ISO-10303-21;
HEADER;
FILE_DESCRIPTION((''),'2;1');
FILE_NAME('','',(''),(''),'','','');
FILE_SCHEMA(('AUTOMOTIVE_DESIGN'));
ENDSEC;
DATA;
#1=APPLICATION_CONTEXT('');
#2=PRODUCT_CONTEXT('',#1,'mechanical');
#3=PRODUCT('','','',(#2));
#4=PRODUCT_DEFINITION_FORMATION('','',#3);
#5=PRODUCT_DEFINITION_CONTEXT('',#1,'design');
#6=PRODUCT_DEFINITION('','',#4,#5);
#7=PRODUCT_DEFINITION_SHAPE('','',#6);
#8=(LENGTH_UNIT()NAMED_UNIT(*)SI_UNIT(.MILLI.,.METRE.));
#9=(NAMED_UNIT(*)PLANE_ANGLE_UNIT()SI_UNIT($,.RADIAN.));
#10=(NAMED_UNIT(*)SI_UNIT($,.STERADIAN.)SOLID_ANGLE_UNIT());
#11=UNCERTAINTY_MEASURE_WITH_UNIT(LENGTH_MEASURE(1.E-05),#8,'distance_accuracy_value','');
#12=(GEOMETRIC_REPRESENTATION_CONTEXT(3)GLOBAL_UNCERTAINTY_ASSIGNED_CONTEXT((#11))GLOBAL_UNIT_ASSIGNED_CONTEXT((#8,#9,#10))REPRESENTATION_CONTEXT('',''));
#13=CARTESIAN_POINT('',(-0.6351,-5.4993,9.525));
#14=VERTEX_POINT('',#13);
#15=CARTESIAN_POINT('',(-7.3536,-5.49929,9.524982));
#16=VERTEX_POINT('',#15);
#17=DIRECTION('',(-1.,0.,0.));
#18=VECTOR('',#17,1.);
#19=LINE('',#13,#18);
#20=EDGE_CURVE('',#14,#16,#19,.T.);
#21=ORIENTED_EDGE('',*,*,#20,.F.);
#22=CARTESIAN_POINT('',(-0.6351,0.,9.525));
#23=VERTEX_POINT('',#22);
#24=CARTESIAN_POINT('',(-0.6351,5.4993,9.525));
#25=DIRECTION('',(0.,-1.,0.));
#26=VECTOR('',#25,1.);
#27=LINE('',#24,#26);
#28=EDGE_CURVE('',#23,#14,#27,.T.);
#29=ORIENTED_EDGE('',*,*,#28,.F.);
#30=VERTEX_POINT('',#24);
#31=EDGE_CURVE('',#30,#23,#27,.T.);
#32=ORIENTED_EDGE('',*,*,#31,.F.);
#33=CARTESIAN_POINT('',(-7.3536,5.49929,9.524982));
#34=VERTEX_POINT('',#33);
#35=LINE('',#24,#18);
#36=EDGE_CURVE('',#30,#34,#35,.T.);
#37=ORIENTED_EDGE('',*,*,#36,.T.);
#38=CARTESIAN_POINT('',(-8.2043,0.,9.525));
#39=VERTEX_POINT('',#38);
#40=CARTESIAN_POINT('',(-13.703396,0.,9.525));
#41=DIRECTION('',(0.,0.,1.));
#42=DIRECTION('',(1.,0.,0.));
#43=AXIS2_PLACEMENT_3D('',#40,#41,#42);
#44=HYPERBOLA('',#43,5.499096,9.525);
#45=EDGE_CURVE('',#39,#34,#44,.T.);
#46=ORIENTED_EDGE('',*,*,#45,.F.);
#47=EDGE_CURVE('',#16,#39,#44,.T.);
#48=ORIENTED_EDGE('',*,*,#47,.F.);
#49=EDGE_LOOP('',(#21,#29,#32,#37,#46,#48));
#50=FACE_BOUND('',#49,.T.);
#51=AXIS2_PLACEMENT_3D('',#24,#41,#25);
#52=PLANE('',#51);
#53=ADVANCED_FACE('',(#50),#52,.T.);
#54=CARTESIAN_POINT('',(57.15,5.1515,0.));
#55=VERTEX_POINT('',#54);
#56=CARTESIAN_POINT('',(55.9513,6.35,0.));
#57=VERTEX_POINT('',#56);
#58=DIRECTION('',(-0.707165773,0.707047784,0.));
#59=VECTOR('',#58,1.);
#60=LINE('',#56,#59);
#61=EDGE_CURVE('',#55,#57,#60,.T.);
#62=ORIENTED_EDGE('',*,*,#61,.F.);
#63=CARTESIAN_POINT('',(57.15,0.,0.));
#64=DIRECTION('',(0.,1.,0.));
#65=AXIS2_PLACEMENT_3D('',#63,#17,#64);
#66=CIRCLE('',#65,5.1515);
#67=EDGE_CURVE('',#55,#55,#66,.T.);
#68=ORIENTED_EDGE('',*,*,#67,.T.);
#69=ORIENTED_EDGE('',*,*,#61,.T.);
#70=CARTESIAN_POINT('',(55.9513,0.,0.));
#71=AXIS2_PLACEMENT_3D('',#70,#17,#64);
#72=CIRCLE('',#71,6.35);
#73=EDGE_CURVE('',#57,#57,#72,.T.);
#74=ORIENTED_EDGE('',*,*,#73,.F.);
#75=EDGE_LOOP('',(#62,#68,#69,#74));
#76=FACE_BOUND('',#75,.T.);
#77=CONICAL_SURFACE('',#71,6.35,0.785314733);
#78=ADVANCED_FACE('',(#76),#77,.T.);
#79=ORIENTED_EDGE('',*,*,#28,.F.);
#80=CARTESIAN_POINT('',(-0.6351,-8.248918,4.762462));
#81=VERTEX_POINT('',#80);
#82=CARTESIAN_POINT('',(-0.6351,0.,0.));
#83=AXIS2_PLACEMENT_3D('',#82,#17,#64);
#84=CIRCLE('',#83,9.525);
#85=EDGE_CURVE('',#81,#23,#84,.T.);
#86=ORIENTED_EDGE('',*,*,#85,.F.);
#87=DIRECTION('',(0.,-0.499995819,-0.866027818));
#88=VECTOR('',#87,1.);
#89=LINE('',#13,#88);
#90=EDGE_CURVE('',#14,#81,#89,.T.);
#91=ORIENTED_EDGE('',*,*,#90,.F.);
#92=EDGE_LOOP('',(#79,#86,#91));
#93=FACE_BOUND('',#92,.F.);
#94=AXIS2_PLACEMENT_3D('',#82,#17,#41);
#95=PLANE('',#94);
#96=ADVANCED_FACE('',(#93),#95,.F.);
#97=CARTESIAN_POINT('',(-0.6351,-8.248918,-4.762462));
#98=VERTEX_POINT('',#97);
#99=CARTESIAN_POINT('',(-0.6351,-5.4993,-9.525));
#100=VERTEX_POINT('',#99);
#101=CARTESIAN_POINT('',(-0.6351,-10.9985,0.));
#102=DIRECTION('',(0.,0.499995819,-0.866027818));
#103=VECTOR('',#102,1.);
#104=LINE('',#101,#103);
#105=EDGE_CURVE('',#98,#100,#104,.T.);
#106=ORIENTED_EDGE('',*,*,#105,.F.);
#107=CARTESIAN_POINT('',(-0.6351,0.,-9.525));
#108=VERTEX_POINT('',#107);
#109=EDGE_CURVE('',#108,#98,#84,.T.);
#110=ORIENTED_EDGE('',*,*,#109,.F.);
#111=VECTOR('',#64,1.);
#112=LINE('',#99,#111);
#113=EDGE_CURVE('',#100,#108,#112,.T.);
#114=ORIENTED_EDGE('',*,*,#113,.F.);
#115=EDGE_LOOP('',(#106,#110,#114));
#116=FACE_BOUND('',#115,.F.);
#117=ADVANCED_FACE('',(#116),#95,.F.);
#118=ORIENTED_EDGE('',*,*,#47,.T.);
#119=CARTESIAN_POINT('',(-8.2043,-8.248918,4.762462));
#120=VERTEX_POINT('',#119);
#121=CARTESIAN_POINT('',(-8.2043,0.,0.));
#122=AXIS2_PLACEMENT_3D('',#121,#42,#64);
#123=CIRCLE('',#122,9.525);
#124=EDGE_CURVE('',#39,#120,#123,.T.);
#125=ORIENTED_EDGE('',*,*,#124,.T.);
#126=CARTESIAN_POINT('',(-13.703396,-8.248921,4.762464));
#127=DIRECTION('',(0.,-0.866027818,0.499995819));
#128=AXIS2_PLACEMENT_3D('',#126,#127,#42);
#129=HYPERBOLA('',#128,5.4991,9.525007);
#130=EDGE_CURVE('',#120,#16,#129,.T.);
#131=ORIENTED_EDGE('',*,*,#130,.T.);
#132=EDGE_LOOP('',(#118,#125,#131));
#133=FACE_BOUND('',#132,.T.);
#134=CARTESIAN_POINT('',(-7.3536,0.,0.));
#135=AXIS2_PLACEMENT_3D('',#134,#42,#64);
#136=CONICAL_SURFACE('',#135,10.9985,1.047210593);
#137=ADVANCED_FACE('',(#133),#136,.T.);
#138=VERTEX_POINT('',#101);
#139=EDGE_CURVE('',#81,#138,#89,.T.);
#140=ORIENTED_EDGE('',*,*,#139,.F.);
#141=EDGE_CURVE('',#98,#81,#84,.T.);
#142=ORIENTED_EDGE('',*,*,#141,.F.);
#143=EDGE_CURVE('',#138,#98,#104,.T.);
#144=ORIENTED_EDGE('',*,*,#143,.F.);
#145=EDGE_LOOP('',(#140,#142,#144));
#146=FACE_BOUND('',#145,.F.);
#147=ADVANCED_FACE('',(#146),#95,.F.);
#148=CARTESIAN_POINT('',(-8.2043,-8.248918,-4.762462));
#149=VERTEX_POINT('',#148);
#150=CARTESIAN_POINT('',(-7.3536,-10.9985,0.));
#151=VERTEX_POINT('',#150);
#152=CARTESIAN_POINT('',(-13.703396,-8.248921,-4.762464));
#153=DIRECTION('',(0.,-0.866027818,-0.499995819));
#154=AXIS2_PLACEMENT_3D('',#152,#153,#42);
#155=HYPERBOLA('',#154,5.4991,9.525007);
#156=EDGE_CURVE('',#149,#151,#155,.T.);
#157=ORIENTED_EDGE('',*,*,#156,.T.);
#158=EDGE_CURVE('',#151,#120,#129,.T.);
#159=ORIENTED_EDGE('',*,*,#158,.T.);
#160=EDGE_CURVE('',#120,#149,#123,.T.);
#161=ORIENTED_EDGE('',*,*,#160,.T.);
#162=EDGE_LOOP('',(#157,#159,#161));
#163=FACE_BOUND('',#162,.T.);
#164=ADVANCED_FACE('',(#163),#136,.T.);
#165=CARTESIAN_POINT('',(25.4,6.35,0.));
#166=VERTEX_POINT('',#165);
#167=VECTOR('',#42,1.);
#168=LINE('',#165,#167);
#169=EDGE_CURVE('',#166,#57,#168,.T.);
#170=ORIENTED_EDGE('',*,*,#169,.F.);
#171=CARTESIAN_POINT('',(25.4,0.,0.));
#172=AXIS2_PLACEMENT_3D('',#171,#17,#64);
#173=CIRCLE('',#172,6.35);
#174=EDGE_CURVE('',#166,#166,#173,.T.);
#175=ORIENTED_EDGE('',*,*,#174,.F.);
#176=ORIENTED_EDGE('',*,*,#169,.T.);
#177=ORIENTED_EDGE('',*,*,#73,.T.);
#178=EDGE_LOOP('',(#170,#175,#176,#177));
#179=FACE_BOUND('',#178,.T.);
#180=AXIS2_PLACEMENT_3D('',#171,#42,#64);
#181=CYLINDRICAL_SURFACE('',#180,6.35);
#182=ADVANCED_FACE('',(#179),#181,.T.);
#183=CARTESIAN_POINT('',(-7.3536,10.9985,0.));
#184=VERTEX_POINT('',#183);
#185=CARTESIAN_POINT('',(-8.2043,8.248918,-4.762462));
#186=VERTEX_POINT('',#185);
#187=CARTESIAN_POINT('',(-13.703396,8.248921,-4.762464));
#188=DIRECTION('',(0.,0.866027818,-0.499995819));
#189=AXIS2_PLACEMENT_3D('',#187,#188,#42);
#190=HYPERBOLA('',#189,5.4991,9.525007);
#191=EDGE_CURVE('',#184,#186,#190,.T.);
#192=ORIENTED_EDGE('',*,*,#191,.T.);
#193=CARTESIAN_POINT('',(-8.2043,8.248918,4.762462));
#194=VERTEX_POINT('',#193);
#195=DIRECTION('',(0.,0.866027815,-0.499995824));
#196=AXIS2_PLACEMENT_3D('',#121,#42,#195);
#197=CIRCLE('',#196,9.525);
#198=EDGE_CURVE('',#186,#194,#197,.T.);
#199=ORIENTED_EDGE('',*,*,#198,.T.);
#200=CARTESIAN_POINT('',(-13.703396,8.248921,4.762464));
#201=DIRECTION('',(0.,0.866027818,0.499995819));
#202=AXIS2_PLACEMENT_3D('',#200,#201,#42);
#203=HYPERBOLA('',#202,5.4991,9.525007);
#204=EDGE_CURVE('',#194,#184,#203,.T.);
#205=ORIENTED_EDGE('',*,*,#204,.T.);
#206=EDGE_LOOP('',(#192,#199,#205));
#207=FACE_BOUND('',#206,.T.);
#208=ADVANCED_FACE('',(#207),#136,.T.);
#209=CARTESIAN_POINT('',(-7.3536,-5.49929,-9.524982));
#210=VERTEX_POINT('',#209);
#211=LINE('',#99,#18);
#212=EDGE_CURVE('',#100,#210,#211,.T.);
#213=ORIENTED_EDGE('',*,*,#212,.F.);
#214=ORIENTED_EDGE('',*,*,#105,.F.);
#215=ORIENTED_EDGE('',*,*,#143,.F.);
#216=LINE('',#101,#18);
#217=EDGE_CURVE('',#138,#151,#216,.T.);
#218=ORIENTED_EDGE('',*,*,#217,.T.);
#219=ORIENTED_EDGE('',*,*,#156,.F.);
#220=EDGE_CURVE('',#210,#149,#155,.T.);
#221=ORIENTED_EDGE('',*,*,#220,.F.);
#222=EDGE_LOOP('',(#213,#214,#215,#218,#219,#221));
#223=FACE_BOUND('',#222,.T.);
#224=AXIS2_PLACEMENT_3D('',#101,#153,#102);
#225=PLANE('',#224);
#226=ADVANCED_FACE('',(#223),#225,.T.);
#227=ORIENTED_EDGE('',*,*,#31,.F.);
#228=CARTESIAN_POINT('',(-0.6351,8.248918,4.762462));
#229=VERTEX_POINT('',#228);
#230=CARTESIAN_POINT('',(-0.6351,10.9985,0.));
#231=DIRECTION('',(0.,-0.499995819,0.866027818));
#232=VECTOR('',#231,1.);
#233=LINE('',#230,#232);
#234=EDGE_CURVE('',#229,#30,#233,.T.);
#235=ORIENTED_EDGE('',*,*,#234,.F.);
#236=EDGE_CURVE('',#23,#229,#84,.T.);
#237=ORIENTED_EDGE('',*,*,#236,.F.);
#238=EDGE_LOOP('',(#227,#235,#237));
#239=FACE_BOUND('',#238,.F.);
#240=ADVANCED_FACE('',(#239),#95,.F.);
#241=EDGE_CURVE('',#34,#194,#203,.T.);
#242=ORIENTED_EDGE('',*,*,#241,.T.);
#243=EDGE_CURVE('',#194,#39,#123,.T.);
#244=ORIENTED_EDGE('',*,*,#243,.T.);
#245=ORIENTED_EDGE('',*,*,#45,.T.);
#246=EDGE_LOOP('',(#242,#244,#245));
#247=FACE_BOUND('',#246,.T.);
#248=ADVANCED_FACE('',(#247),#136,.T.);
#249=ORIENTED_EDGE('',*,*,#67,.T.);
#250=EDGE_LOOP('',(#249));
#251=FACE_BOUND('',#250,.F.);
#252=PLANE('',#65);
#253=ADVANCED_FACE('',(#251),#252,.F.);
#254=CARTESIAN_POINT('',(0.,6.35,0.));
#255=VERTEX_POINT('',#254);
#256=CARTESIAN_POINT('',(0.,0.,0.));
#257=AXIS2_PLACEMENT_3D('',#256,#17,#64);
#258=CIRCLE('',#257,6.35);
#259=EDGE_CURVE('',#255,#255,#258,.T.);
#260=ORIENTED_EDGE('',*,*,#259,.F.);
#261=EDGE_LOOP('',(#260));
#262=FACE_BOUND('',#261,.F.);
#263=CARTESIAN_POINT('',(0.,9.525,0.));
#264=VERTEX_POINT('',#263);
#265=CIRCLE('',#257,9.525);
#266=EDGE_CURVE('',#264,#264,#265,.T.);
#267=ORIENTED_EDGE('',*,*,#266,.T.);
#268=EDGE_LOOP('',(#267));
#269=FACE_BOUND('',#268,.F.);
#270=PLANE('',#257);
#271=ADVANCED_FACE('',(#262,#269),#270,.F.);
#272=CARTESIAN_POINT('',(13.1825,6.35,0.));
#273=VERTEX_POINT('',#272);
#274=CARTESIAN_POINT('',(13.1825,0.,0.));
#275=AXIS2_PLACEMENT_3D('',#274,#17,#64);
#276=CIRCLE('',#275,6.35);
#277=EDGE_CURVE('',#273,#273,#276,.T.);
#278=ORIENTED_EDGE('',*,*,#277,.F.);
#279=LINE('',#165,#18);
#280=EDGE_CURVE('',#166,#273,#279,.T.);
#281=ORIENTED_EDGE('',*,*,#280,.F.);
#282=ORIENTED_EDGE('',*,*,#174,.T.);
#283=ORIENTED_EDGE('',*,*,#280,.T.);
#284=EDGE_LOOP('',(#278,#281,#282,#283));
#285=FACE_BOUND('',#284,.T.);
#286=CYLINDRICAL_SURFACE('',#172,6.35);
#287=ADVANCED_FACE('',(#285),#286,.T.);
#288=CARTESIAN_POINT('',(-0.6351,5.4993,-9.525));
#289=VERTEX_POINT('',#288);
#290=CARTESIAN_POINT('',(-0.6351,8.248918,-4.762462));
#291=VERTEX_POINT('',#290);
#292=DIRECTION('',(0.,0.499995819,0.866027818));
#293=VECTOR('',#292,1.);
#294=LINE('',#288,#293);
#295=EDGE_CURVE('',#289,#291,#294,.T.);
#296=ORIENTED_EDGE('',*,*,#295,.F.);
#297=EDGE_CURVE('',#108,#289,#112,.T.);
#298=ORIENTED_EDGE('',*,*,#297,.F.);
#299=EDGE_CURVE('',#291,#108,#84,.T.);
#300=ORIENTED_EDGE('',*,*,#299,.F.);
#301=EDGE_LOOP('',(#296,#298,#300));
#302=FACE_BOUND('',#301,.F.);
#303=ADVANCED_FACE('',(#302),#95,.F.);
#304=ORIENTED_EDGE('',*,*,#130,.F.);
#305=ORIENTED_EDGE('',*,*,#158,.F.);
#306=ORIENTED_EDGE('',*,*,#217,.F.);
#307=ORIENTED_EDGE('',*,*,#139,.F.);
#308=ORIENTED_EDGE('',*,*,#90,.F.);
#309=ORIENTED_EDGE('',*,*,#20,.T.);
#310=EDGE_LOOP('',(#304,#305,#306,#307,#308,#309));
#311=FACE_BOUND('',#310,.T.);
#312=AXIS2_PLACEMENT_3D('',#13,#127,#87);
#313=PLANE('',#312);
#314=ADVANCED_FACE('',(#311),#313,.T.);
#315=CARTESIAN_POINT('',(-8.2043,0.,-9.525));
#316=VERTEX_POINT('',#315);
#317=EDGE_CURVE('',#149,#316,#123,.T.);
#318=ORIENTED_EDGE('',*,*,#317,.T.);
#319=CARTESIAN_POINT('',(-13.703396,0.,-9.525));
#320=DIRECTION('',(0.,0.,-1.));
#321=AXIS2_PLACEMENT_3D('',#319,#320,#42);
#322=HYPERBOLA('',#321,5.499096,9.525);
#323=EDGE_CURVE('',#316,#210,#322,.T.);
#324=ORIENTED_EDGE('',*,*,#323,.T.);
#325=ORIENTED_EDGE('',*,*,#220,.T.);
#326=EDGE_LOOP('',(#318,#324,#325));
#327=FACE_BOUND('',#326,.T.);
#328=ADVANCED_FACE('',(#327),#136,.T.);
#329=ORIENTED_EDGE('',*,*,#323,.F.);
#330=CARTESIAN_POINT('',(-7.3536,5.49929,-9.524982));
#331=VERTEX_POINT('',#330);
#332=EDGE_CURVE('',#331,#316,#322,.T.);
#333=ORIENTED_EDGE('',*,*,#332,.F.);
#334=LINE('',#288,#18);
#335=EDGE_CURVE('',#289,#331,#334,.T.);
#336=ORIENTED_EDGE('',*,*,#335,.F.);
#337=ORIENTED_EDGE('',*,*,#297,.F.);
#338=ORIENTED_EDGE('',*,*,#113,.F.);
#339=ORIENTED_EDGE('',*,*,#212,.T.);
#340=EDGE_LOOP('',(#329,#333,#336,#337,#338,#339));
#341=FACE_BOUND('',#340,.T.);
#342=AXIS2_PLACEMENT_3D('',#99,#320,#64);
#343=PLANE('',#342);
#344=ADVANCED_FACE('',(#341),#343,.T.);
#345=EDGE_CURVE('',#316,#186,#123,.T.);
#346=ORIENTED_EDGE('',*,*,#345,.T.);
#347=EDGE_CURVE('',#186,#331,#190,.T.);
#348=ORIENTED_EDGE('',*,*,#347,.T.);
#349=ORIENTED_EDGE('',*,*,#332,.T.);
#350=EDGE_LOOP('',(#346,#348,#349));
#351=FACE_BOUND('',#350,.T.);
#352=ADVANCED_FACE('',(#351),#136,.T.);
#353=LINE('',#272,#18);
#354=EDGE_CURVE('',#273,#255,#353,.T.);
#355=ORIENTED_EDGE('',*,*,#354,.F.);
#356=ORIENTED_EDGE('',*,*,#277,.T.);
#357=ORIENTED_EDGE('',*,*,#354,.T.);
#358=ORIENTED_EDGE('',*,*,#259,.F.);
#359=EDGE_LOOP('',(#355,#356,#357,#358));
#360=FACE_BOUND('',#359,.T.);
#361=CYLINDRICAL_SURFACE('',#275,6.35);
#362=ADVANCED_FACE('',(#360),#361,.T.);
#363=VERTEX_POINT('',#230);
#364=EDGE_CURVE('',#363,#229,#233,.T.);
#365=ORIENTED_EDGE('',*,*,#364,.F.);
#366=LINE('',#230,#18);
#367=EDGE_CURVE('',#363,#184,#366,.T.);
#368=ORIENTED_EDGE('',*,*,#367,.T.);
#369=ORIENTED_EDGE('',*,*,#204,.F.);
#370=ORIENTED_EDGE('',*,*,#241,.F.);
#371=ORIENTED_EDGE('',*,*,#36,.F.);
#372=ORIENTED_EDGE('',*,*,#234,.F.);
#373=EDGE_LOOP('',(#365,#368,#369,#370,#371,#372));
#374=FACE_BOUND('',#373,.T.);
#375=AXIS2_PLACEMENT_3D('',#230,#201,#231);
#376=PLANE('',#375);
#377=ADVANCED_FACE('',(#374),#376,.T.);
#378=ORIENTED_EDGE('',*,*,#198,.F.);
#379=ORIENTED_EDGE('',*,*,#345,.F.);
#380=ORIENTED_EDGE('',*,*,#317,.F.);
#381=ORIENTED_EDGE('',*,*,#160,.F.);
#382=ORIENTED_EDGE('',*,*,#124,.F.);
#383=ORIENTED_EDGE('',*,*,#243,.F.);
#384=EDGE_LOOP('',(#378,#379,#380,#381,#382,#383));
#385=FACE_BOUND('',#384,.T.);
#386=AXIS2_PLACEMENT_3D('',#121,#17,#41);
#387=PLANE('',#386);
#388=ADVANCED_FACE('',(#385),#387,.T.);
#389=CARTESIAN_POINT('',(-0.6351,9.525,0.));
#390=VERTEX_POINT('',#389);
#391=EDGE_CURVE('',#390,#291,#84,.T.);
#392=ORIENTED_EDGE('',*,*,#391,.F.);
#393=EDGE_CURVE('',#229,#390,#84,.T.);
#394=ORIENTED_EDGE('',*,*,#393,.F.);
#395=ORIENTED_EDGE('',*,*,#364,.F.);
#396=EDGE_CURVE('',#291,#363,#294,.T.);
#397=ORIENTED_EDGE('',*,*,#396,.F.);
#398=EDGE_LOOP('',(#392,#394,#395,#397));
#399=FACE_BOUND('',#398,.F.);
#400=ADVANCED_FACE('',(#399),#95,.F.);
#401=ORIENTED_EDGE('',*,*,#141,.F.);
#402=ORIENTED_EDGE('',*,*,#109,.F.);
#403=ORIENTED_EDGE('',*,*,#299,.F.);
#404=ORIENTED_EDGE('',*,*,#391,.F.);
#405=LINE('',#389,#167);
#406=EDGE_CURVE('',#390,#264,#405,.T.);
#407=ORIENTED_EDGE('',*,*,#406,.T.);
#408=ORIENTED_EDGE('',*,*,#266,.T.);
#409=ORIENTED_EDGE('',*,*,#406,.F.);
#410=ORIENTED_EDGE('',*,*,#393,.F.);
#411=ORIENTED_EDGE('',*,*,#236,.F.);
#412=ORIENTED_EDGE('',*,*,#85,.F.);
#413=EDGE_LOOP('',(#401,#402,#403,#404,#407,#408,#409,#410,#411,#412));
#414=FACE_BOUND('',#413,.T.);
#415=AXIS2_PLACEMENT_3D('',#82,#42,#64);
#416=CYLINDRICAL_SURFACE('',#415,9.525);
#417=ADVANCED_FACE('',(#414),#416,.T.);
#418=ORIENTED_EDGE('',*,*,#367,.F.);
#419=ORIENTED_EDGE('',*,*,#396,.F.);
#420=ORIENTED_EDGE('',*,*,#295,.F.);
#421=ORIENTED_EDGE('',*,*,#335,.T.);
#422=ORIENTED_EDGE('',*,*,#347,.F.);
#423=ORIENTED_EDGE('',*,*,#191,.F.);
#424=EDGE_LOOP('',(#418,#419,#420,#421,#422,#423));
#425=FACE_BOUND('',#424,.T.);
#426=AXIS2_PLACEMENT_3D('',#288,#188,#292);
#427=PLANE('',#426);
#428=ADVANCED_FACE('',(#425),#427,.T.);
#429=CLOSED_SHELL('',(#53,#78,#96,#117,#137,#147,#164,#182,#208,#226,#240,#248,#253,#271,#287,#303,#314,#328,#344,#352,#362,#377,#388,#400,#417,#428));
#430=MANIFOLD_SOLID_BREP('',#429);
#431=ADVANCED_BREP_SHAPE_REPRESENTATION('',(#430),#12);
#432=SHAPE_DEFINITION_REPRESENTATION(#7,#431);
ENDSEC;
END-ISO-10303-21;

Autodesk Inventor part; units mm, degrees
ref_plane "YZ Plane" through (0, 0, 0) normal (1, 0, 0) x (0, 1, 0)
ref_plane "XZ Plane" through (0, 0, 0) normal (0, 1, 0) x (-1, 0, 0)
sketch "Sketch1" plane through (0, 0, 0) normal (0, 0, 1) x (1, 0, 0)
  line L0 (0, 9.525) -> (0, 6.35)
  line L1 (25.4, 6.35) -> (57.15, 6.35)
  line L2 (57.15, 6.35) -> (57.15, 0)
  line L3 (57.15, 0) -> (-0.6351, 0)
  line L4 (-12.1921, 0) -> (68.707, 0) projected
  line L5 (-0.6351, 0) -> (-0.6351, 9.525)
  line L6 (-0.6351, 9.525) -> (0, 9.525)
  line L7 (25.4, 6.35) -> (13.1825, 6.35)
  line L8 (13.1825, 6.35) -> (0, 6.35)
  line L9 (0, -1.905) -> (0, 11.43) projected
  dimension "d0" = 57.15
  dimension "d1" = 31.75
  dimension "d2" = 12.7
  dimension "d9" = 0.6351
  dimension "d10" = 19.05
  dimension "d13" = 12.2175
  dimension "d14" = 12.7
revolve "Body" add sketch "Sketch1" angle 360 about axis through (57.15, 0, 0) along (-1, 0, 0)
sketch "Sketch2" plane through (-0.6351, 0, 0) normal (-1, 0, 0) x (0, 0, 1)
  line L0 (0, 10.9985) -> (9.525, 5.4993)
  line L1 (9.525, 5.4993) -> (9.525, -5.4993)
  line L2 (9.525, -5.4993) -> (0, -10.9985)
  line L3 (0, -10.9985) -> (-9.525, -5.4993)
  line L4 (-9.525, -5.4993) -> (-9.525, 5.4993)
  line L5 (-9.525, 5.4993) -> (0, 10.9985)
  point P0 (0, 0)
  point P1 (0, 0)
  dimension "d11" = 19.05
extrude "Head" add sketch "Sketch2" along normal blind 7.5692
sketch "Sketch4" plane through (0, 0, 0) normal (0, 0, 1) x (1, 0, 0)
  line L0 (-8.2043, 9.525) -> (-8.2043, 10.9985)
  line L1 (-8.2043, 10.9985) -> (-7.3536, 10.9985)
  line L2 (-7.3536, 10.9985) -> (-8.2043, 9.525)
  line L3 (-9.7181, 0) -> (0.8787, 0) projected
  line L4 (-0.6351, 10.9985) -> (-8.2043, 10.9985) projected
  line L5 (-8.2043, 5.4993) -> (-8.2043, 10.9985) projected
  dimension "d5" = 30
  dimension "d19" = 19.05
revolve "Chamfer1" cut sketch "Sketch4" angle 360 about axis through (-10, 0, 0) along (1, 0, 0)
thread "Thread" size "1/2-13 UNC" class "2A" standard "ANSI Unified Screw Threads" length 31.75
chamfer "Chamfer2" distance 1.1985 distance2 1.1987 1 edges at (57.15, -6.35, 0) measured on face at (57.15, -0.2551, -3.1143)
ref_plane "Work Plane1" through (1.525, 0, 0) normal (0, 0, 1) x (1, 0, 0)
equation "\"d0\" = NLG"
equation "\"d1\" = GEL"
equation "\"d2\" = GD"
equation "\"d10\" = SD2"
equation "\"d14\" = BDM"
equation "\"d11\" = SW"
equation "\"d3\" = KOH - SD"
equation "\"d5\" = ANG1"
equation "\"d19\" = SW0"
equation "\"d15\" = GEL"
equation "\"d6\" = -0.5 * SPD + 0.5 * GD"
equation "\"NLG\" = 57.15"
equation "\"GD\" = 12.7"
equation "\"BDM\" = 12.7"
equation "\"KOH\" = 8.2042"
equation "\"GEL\" = 31.75"
equation "\"SW\" = 19.05"
equation "\"SW0\" = SW"
equation "\"SPD\" = GD1"
equation "\"SD2\" = SW"
equation "\"SD\" = 0.635"
equation "\"ANG1\" = 30deg"
equation "\"GAL\" = 12.2174"
equation "\"GUL\" = 1.19863"
equation "\"RR\" = 0.381"
equation "\"WFT\" = SD"
equation "\"GD1\" = 10.303"
equation "\"THREADDIA\" = 12.7"
equation "\"SDH\" = SW"
equation "\"SDHG\" = 13.1826"
equation "\"TOA\" = 30deg"
equation "\"FAWI\" = 45deg"
equation "\"NND\" = 12.7"
equation "\"E0\" = 22.00275"
properties part number "AS 2465 - 1/2 x 2 1/4  UNC" material "Steel, Mild"
